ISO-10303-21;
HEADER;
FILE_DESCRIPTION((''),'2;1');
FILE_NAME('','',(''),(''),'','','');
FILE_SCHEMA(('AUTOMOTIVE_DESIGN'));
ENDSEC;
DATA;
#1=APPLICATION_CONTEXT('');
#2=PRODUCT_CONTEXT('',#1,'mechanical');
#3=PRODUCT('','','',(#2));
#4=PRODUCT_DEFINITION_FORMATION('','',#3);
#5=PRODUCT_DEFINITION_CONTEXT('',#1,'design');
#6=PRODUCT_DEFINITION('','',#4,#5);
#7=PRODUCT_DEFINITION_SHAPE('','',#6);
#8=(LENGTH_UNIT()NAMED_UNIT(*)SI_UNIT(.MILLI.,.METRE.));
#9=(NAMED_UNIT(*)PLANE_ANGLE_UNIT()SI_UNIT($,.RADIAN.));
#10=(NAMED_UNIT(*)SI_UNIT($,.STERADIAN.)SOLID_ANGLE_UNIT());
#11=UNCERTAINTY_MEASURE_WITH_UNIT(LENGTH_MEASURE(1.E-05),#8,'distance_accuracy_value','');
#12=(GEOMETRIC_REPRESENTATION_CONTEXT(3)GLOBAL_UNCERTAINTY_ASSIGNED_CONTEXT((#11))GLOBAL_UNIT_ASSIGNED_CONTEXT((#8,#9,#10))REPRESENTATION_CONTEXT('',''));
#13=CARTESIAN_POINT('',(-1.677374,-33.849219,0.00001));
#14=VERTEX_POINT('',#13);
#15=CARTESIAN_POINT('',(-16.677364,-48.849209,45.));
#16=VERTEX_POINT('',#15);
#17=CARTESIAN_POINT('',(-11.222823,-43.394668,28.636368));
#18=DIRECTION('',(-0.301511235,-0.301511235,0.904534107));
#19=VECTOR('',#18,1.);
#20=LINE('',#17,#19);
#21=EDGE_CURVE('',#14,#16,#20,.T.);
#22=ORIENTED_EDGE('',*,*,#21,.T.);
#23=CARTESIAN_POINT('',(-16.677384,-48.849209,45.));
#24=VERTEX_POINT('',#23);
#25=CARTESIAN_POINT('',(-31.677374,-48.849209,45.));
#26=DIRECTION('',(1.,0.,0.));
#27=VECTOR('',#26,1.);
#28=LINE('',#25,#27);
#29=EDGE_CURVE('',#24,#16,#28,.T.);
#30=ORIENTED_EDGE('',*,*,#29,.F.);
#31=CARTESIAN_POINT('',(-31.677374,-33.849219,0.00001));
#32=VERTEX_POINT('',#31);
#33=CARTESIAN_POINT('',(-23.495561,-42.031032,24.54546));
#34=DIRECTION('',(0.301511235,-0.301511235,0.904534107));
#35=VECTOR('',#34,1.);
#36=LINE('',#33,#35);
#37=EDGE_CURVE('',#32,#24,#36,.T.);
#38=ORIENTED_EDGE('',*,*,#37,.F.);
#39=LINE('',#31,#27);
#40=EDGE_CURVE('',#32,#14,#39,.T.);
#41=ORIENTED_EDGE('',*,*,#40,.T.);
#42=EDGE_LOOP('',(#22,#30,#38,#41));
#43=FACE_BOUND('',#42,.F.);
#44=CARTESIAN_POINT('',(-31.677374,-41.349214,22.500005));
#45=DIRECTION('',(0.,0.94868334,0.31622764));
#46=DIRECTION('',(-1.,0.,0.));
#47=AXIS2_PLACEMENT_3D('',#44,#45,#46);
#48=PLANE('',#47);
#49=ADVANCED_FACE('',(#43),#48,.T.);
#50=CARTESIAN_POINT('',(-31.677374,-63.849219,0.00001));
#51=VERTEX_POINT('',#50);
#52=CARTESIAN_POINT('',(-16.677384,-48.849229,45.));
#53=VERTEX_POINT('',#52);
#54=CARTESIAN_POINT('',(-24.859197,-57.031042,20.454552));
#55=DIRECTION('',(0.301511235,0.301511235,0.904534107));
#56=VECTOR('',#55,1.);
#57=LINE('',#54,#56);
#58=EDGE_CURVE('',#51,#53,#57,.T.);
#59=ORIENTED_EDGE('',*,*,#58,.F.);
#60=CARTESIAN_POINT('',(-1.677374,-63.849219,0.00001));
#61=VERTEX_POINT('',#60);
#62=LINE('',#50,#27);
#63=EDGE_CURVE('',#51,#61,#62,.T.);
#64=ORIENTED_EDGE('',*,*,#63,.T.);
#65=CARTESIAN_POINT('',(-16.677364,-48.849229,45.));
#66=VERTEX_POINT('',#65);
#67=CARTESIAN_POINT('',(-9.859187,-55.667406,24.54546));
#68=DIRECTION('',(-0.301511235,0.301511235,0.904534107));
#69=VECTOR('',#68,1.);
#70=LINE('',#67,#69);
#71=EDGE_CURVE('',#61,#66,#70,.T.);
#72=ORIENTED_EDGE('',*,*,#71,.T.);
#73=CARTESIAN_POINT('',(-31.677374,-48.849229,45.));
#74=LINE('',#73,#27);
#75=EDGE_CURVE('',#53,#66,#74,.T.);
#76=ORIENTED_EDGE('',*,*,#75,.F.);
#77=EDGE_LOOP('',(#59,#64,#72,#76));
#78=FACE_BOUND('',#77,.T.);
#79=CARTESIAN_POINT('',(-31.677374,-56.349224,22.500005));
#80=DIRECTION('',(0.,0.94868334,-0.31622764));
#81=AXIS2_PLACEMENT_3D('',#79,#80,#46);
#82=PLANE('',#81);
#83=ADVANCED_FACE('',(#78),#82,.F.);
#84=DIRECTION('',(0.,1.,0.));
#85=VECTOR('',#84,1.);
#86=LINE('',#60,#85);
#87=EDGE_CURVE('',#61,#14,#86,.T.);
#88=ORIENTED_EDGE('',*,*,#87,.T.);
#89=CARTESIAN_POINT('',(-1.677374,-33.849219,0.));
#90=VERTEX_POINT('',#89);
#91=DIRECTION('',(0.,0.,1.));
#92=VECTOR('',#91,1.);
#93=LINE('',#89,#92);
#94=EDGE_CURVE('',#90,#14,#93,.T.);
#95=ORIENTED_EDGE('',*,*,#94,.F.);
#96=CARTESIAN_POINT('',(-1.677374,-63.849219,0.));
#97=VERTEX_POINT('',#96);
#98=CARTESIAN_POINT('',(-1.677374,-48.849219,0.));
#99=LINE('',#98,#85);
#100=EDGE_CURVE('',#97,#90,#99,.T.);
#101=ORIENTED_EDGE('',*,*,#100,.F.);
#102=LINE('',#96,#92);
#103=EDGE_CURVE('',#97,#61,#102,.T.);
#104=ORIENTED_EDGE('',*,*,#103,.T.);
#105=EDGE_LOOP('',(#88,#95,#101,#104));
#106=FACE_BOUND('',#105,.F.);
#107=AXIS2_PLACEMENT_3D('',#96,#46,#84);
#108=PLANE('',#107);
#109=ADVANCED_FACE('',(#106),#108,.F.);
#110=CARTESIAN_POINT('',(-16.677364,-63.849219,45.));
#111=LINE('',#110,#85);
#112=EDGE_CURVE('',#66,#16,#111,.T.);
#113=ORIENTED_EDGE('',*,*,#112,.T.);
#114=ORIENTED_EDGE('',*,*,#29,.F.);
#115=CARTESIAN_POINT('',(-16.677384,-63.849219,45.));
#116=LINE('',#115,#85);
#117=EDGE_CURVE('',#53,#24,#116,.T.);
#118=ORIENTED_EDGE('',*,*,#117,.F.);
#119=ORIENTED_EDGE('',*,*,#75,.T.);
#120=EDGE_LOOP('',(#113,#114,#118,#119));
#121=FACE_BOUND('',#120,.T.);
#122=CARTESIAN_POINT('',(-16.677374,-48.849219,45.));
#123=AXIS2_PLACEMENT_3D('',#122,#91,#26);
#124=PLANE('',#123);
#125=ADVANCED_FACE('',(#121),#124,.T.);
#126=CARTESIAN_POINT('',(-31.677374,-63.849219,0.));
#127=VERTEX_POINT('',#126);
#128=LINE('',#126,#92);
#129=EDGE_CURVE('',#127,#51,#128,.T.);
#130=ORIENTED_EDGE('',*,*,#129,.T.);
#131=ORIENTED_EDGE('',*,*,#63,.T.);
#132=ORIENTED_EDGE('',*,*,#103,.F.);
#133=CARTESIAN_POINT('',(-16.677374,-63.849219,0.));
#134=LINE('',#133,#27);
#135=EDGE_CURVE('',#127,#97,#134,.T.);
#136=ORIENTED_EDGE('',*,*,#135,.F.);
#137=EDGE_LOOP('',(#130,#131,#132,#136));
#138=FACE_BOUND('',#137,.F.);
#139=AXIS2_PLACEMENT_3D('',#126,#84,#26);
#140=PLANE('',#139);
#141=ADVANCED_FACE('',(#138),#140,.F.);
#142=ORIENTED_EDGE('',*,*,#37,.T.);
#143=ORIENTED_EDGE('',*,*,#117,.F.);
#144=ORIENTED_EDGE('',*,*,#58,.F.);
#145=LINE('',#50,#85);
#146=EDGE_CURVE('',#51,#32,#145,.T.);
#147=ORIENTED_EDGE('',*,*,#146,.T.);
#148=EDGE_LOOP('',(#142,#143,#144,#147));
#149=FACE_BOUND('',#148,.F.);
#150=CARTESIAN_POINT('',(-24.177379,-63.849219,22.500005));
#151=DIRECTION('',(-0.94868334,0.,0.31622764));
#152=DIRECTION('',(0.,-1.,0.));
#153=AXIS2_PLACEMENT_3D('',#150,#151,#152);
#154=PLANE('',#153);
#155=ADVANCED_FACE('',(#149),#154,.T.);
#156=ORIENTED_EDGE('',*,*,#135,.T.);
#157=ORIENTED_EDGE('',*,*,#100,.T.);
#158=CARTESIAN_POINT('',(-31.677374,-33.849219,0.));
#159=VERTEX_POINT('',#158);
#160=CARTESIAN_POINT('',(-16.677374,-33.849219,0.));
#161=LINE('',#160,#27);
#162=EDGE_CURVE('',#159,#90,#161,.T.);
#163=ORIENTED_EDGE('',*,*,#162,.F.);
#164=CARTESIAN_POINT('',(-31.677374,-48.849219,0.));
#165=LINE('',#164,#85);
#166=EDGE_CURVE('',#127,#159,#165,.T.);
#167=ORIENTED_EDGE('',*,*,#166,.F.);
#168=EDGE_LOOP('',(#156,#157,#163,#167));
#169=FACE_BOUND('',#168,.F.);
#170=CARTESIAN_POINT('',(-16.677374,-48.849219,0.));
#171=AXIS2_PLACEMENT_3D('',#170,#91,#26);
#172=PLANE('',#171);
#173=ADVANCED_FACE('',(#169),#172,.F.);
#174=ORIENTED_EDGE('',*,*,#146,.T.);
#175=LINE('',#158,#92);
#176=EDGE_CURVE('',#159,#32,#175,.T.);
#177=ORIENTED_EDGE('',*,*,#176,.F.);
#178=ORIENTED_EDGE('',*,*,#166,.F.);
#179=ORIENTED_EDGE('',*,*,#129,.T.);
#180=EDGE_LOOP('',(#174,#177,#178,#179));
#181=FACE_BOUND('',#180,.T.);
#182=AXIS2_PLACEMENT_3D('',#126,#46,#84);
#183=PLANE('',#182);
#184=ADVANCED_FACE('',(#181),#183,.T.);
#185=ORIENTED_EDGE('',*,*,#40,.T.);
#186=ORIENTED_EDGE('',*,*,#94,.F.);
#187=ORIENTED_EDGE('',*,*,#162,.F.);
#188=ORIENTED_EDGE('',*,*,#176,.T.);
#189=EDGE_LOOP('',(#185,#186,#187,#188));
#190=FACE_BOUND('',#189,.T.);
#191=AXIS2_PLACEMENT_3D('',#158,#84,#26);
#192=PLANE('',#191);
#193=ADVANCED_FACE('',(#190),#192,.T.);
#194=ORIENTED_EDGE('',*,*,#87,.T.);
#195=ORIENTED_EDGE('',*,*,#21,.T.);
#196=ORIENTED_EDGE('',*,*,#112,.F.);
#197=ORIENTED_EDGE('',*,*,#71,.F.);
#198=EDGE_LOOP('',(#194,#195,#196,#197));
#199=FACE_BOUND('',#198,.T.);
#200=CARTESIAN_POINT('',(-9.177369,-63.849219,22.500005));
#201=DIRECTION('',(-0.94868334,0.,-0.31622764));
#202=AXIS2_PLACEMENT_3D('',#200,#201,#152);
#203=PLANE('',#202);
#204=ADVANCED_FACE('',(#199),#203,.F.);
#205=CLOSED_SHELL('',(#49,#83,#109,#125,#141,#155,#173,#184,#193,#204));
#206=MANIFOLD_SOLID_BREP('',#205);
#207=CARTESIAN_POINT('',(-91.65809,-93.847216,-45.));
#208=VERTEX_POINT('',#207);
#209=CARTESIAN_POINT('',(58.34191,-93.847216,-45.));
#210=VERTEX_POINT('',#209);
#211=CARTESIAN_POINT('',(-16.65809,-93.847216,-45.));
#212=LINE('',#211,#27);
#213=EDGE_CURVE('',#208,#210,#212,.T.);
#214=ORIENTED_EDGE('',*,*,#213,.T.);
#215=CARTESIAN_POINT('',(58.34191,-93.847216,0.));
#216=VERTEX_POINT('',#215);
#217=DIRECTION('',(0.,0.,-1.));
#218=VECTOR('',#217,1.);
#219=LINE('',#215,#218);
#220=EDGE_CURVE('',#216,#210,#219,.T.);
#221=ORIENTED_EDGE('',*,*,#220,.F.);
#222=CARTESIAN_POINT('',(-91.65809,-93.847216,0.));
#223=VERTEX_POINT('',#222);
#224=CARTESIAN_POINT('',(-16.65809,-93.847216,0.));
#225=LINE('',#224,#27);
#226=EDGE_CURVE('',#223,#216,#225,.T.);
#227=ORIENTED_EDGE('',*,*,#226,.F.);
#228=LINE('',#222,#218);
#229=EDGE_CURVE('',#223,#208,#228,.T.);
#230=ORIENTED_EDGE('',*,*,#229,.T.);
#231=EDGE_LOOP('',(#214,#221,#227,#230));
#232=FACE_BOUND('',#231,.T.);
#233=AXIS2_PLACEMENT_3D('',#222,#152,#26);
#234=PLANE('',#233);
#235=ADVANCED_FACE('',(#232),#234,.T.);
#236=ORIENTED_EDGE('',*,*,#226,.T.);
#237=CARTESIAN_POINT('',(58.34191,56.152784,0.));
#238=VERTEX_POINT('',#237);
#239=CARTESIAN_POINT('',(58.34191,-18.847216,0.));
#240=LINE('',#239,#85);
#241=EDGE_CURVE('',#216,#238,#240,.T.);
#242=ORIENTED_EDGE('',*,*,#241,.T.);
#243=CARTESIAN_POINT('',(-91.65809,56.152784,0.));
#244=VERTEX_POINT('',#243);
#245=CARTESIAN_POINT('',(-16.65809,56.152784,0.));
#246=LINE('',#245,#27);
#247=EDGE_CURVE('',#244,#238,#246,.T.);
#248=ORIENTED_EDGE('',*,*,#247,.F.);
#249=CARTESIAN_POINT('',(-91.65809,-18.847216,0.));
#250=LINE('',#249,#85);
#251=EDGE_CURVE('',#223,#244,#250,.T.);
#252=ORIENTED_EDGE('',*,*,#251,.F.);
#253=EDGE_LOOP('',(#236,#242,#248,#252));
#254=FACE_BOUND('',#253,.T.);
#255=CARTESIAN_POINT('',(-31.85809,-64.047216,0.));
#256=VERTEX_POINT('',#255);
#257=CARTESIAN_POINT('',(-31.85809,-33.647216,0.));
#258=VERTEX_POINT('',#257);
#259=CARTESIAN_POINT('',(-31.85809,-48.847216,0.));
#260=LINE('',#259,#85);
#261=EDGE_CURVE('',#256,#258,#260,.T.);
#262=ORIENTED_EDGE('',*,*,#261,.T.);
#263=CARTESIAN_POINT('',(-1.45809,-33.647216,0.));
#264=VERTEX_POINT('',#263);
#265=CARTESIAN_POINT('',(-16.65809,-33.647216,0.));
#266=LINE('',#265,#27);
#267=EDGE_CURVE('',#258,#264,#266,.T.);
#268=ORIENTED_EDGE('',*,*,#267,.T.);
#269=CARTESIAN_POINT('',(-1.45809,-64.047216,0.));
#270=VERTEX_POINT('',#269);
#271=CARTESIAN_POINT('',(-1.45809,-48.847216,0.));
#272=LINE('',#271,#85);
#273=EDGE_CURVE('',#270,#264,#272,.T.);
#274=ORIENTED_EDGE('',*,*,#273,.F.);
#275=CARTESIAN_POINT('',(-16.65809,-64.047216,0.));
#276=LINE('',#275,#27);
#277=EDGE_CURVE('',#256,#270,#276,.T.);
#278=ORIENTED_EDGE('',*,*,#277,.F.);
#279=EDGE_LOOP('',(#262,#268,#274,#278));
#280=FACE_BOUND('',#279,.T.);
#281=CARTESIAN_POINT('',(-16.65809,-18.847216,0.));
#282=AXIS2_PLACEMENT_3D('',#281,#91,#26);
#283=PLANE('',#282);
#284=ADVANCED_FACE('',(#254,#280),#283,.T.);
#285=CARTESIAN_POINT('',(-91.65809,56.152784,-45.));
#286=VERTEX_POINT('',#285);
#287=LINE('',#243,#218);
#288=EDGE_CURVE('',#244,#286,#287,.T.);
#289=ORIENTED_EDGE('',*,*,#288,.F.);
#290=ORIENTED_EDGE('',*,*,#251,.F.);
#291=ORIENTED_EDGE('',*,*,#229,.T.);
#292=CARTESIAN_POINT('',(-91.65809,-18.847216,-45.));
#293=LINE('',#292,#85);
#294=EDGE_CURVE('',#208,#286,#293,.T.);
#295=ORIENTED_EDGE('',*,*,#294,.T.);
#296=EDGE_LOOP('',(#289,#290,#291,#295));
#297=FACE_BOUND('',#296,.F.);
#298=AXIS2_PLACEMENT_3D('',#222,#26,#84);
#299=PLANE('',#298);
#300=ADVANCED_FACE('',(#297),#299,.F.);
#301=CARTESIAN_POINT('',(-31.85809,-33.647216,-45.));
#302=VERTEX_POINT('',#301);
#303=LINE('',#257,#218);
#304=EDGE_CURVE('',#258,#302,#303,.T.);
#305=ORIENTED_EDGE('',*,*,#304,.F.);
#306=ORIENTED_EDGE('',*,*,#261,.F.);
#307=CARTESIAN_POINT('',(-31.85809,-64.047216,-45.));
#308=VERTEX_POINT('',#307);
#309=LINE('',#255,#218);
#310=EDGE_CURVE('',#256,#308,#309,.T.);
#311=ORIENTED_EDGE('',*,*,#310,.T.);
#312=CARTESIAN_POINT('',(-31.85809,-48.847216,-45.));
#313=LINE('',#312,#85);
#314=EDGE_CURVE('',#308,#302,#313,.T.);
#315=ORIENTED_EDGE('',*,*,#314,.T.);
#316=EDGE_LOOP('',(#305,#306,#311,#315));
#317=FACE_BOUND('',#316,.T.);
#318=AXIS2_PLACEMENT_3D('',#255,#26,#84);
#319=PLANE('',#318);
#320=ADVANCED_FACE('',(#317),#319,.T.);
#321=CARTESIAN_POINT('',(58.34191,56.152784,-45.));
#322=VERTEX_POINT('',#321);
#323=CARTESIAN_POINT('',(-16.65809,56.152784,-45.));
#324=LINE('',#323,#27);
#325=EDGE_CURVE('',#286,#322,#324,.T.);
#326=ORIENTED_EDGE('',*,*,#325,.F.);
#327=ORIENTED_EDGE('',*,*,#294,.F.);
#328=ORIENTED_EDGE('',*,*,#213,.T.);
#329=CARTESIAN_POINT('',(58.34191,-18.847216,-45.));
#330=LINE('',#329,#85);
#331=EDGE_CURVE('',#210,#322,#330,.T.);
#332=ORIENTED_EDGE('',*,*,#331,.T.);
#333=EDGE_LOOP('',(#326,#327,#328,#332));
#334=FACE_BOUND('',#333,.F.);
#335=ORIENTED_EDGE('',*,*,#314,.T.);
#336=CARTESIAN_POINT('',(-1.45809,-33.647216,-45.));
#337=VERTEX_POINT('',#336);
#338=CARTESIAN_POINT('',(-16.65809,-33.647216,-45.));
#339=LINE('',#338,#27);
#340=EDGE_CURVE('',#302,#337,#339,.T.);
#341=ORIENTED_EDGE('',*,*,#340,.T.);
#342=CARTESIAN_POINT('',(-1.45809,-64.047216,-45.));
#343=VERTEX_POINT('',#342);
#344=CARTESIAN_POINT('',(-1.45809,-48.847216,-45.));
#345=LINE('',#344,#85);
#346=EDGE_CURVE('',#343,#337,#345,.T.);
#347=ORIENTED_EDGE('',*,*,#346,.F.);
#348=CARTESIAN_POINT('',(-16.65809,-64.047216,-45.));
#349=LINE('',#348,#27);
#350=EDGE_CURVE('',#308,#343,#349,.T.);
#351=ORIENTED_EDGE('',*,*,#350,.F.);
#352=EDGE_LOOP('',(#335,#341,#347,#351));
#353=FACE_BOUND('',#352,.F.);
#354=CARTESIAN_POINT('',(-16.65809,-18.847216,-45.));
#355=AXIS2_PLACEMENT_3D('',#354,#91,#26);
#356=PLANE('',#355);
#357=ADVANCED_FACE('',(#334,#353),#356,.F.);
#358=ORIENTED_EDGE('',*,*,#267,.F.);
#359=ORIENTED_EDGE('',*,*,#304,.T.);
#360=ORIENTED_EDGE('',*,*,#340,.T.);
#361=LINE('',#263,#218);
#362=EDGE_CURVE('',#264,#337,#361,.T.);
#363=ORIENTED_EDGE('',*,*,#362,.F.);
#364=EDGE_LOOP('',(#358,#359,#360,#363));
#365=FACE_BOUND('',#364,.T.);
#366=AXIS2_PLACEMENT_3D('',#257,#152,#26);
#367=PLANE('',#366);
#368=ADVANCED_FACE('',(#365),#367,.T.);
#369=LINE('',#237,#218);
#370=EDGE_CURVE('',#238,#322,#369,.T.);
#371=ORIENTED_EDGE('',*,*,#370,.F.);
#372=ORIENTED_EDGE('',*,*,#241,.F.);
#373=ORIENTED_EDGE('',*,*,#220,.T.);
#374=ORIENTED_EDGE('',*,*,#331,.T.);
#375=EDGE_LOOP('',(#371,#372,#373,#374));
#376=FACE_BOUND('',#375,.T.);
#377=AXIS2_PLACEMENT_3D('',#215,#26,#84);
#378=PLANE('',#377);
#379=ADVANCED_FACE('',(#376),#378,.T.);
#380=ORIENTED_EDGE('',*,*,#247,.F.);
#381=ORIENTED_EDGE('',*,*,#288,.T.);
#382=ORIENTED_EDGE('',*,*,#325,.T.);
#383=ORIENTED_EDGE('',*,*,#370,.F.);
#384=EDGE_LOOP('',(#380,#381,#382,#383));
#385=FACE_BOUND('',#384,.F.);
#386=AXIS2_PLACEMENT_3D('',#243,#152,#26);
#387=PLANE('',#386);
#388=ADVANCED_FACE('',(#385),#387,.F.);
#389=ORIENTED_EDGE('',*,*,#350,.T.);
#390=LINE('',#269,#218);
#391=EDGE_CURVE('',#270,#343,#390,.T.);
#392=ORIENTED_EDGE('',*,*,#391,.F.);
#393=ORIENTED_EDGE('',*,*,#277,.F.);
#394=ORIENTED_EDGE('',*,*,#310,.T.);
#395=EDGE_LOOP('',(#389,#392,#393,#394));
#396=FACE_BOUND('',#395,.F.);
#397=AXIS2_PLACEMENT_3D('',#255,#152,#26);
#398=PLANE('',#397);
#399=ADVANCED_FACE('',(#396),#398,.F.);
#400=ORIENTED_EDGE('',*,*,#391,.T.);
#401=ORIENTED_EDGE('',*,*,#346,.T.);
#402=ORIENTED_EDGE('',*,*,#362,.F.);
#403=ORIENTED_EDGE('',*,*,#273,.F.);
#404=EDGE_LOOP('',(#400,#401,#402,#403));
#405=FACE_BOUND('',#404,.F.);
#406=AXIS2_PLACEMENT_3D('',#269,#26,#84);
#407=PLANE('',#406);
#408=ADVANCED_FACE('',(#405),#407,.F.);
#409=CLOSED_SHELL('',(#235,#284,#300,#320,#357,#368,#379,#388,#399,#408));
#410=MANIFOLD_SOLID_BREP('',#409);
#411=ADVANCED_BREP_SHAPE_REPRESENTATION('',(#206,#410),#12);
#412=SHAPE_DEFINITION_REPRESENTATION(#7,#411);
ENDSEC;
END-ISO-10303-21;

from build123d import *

# Parameters (mm, degrees)
F0_W     = 150
F0_H     = 150
F0_W_2   = 30.4
F0_H_2   = 30.4
F1_DEPTH = 45
F2_W     = 30
F2_H     = 30
F3_DEPTH = 45
F4_SIZE2 = 14.99999
F4_SIZE  = 44.99999


# Not quite as in the source:
# - a fillet or chamfer is up to 0.001 mm smaller than in the source, because OpenCascade refuses the exact size


with BuildPart() as f1:
    # F0 (on Top) → F1 (new body)
    with BuildSketch(Plane.XY):
        with Locations((-16.6580903113, -18.8472156852)):
            Rectangle(F0_W, F0_H)
        with Locations((-16.6580903113, -48.8472156852)):
            Rectangle(F0_W_2, F0_H_2, mode=Mode.SUBTRACT)
    extrude(amount=-F1_DEPTH)


with BuildPart() as f3:
    # F2 (on Top) → F3 (new body)
    with BuildSketch(Plane.XY):
        with Locations((-16.6773743331, -48.8492193)):
            Rectangle(F2_W, F2_H)
    extrude(amount=F3_DEPTH)

    # F4 (size 45 and 15 in the source; OpenCascade refuses exactly that, so slightly less here)
    f4_edges = [f3.edges().sort_by_distance(p)[0] for p in [
        (-1.677374, -48.849219, 45),
        (-16.677374, -33.849219, 45),
        (-31.677374, -48.849219, 45),
        (-16.677374, -63.849219, 45),
    ]]
    chamfer(f4_edges, length=F4_SIZE, length2=F4_SIZE2)


solid = Compound([f1.part, f3.part])
